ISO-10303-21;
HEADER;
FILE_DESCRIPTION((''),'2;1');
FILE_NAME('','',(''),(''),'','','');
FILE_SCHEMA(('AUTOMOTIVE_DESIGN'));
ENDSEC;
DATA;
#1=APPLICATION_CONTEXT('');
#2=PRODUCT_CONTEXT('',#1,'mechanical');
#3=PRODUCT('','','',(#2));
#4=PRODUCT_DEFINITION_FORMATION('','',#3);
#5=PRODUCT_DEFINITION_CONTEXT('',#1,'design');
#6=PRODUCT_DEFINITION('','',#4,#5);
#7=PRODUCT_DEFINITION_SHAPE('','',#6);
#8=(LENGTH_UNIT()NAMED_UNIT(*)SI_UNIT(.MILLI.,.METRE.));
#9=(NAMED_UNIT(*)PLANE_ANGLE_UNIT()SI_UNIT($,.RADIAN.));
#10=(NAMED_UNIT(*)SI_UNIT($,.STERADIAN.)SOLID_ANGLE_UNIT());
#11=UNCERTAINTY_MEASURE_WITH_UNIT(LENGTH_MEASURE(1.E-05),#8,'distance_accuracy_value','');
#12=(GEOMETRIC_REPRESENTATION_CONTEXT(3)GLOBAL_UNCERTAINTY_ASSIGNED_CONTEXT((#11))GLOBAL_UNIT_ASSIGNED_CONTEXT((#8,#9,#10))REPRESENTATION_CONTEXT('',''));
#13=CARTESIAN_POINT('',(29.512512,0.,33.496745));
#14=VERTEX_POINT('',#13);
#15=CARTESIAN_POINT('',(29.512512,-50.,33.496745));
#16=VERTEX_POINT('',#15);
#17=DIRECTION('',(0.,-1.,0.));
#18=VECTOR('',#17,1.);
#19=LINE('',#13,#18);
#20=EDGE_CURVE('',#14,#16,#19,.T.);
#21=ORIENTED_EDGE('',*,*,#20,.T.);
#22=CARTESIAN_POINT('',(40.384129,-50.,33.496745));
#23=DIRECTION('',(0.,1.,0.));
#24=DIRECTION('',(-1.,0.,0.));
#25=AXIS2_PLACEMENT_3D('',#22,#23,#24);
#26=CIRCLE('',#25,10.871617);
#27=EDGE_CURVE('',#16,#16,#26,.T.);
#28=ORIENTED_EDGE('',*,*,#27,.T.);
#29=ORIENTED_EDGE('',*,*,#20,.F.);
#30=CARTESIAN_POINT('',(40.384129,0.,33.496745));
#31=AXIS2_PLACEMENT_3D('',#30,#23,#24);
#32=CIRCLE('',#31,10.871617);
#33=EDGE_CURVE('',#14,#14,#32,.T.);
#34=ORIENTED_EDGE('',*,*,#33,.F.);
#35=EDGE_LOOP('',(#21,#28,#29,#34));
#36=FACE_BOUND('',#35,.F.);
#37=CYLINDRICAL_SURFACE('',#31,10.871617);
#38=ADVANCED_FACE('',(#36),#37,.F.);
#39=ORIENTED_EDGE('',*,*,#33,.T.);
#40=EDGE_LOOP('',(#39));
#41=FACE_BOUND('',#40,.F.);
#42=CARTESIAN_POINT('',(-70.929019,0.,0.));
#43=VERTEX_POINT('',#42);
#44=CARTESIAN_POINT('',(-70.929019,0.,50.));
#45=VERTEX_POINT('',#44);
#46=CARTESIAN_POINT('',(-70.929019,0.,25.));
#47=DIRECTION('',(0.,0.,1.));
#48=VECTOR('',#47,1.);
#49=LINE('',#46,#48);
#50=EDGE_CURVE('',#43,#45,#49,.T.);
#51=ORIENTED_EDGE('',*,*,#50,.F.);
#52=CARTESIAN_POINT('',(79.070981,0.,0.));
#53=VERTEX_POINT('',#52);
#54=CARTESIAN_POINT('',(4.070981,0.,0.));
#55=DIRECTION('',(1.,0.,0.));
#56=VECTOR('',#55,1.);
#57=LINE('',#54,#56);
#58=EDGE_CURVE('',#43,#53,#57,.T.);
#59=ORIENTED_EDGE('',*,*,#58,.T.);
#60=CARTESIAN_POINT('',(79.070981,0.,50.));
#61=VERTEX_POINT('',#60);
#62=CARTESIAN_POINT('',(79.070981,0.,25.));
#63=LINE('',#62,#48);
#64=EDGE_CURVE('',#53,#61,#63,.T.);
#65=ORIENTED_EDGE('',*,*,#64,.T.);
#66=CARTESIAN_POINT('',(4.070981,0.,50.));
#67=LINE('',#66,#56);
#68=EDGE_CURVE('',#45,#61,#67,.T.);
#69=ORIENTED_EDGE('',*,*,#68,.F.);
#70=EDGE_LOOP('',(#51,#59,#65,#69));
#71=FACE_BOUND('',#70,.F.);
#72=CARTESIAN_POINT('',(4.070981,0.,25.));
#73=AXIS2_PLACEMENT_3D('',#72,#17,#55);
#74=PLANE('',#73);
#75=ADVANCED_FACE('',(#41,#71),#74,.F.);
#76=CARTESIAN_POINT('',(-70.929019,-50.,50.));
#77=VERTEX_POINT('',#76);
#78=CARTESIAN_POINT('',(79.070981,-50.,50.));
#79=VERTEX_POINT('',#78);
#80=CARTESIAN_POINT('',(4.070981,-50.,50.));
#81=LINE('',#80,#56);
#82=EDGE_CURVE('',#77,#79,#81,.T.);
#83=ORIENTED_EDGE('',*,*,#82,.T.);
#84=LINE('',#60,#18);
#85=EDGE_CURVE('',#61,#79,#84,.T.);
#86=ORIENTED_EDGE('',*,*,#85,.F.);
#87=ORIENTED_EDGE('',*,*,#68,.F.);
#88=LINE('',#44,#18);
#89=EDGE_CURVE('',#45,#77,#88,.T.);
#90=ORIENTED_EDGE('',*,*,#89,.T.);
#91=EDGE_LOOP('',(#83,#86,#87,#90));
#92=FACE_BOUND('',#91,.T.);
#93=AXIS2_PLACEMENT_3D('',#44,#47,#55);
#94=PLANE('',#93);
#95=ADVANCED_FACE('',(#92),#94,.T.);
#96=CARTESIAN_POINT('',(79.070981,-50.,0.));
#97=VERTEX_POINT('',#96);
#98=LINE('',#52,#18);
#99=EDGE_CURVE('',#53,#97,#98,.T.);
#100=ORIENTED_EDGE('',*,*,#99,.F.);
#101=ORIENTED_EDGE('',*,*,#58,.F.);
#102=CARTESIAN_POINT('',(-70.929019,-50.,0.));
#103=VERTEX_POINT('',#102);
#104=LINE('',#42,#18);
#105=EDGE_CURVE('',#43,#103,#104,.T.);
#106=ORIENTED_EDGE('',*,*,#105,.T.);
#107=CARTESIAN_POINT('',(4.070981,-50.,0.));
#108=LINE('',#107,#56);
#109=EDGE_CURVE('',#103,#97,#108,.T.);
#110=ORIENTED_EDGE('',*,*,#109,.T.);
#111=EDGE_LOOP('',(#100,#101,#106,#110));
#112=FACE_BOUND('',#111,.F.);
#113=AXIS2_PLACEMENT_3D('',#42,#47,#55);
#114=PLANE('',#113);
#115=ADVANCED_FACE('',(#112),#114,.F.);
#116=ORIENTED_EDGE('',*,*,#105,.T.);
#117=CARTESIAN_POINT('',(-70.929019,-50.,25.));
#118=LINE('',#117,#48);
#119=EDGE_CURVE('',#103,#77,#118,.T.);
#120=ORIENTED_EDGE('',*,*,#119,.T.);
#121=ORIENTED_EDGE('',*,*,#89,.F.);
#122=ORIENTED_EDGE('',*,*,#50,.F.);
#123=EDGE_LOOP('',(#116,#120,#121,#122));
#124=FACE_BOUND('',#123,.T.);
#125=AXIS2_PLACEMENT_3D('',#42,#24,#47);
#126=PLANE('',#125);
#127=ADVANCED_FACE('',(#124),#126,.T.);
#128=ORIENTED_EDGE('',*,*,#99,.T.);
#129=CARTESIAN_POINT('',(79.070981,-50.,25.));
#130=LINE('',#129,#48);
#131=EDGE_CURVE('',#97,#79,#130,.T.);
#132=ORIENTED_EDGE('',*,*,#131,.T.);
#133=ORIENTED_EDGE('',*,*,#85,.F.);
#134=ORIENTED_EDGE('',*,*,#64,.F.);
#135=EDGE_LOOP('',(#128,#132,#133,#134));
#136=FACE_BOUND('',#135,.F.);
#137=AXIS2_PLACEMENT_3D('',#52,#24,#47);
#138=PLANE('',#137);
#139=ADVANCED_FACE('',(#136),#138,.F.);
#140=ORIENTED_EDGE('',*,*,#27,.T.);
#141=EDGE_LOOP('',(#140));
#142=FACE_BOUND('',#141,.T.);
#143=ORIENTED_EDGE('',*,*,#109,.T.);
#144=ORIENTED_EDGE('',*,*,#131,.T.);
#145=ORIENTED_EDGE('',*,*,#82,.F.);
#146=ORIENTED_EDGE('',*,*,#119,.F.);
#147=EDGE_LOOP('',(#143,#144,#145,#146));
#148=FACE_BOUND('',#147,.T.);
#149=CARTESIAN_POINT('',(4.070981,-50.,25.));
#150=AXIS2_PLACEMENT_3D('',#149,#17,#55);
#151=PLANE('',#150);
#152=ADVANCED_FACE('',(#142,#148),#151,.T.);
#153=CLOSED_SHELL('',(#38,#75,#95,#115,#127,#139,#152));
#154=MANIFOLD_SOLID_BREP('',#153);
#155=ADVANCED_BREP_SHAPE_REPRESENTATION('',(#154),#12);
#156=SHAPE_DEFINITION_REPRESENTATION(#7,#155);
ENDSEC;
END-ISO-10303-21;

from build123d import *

# Parameters (mm, degrees)
F0_W     = 150
F0_H     = 50
F1_DEPTH = 50
F4_R     = 10.8716166344
F5_DEPTH = 61


# Not quite as in the source:
# - the program builds the solid bodies; features that only make, move or delete a surface that nothing else refers to are left out


with BuildPart() as f1:
    # F0 (on Front) → F1 (new body)
    with BuildSketch(Plane.XZ):
        with Locations((4.0709814262, 25)):
            Rectangle(F0_W, F0_H)
    extrude(amount=F1_DEPTH)

    # F4 (on face) → F5 (cut)
    with BuildSketch(Plane(origin=(0, 0, 0), x_dir=(-1, 0, 0), z_dir=(0, 1, 0))):
        with Locations((-40.3841286898, 33.4967449307)):
            Circle(F4_R)
    extrude(amount=-F5_DEPTH, mode=Mode.SUBTRACT)


solid = f1.part
